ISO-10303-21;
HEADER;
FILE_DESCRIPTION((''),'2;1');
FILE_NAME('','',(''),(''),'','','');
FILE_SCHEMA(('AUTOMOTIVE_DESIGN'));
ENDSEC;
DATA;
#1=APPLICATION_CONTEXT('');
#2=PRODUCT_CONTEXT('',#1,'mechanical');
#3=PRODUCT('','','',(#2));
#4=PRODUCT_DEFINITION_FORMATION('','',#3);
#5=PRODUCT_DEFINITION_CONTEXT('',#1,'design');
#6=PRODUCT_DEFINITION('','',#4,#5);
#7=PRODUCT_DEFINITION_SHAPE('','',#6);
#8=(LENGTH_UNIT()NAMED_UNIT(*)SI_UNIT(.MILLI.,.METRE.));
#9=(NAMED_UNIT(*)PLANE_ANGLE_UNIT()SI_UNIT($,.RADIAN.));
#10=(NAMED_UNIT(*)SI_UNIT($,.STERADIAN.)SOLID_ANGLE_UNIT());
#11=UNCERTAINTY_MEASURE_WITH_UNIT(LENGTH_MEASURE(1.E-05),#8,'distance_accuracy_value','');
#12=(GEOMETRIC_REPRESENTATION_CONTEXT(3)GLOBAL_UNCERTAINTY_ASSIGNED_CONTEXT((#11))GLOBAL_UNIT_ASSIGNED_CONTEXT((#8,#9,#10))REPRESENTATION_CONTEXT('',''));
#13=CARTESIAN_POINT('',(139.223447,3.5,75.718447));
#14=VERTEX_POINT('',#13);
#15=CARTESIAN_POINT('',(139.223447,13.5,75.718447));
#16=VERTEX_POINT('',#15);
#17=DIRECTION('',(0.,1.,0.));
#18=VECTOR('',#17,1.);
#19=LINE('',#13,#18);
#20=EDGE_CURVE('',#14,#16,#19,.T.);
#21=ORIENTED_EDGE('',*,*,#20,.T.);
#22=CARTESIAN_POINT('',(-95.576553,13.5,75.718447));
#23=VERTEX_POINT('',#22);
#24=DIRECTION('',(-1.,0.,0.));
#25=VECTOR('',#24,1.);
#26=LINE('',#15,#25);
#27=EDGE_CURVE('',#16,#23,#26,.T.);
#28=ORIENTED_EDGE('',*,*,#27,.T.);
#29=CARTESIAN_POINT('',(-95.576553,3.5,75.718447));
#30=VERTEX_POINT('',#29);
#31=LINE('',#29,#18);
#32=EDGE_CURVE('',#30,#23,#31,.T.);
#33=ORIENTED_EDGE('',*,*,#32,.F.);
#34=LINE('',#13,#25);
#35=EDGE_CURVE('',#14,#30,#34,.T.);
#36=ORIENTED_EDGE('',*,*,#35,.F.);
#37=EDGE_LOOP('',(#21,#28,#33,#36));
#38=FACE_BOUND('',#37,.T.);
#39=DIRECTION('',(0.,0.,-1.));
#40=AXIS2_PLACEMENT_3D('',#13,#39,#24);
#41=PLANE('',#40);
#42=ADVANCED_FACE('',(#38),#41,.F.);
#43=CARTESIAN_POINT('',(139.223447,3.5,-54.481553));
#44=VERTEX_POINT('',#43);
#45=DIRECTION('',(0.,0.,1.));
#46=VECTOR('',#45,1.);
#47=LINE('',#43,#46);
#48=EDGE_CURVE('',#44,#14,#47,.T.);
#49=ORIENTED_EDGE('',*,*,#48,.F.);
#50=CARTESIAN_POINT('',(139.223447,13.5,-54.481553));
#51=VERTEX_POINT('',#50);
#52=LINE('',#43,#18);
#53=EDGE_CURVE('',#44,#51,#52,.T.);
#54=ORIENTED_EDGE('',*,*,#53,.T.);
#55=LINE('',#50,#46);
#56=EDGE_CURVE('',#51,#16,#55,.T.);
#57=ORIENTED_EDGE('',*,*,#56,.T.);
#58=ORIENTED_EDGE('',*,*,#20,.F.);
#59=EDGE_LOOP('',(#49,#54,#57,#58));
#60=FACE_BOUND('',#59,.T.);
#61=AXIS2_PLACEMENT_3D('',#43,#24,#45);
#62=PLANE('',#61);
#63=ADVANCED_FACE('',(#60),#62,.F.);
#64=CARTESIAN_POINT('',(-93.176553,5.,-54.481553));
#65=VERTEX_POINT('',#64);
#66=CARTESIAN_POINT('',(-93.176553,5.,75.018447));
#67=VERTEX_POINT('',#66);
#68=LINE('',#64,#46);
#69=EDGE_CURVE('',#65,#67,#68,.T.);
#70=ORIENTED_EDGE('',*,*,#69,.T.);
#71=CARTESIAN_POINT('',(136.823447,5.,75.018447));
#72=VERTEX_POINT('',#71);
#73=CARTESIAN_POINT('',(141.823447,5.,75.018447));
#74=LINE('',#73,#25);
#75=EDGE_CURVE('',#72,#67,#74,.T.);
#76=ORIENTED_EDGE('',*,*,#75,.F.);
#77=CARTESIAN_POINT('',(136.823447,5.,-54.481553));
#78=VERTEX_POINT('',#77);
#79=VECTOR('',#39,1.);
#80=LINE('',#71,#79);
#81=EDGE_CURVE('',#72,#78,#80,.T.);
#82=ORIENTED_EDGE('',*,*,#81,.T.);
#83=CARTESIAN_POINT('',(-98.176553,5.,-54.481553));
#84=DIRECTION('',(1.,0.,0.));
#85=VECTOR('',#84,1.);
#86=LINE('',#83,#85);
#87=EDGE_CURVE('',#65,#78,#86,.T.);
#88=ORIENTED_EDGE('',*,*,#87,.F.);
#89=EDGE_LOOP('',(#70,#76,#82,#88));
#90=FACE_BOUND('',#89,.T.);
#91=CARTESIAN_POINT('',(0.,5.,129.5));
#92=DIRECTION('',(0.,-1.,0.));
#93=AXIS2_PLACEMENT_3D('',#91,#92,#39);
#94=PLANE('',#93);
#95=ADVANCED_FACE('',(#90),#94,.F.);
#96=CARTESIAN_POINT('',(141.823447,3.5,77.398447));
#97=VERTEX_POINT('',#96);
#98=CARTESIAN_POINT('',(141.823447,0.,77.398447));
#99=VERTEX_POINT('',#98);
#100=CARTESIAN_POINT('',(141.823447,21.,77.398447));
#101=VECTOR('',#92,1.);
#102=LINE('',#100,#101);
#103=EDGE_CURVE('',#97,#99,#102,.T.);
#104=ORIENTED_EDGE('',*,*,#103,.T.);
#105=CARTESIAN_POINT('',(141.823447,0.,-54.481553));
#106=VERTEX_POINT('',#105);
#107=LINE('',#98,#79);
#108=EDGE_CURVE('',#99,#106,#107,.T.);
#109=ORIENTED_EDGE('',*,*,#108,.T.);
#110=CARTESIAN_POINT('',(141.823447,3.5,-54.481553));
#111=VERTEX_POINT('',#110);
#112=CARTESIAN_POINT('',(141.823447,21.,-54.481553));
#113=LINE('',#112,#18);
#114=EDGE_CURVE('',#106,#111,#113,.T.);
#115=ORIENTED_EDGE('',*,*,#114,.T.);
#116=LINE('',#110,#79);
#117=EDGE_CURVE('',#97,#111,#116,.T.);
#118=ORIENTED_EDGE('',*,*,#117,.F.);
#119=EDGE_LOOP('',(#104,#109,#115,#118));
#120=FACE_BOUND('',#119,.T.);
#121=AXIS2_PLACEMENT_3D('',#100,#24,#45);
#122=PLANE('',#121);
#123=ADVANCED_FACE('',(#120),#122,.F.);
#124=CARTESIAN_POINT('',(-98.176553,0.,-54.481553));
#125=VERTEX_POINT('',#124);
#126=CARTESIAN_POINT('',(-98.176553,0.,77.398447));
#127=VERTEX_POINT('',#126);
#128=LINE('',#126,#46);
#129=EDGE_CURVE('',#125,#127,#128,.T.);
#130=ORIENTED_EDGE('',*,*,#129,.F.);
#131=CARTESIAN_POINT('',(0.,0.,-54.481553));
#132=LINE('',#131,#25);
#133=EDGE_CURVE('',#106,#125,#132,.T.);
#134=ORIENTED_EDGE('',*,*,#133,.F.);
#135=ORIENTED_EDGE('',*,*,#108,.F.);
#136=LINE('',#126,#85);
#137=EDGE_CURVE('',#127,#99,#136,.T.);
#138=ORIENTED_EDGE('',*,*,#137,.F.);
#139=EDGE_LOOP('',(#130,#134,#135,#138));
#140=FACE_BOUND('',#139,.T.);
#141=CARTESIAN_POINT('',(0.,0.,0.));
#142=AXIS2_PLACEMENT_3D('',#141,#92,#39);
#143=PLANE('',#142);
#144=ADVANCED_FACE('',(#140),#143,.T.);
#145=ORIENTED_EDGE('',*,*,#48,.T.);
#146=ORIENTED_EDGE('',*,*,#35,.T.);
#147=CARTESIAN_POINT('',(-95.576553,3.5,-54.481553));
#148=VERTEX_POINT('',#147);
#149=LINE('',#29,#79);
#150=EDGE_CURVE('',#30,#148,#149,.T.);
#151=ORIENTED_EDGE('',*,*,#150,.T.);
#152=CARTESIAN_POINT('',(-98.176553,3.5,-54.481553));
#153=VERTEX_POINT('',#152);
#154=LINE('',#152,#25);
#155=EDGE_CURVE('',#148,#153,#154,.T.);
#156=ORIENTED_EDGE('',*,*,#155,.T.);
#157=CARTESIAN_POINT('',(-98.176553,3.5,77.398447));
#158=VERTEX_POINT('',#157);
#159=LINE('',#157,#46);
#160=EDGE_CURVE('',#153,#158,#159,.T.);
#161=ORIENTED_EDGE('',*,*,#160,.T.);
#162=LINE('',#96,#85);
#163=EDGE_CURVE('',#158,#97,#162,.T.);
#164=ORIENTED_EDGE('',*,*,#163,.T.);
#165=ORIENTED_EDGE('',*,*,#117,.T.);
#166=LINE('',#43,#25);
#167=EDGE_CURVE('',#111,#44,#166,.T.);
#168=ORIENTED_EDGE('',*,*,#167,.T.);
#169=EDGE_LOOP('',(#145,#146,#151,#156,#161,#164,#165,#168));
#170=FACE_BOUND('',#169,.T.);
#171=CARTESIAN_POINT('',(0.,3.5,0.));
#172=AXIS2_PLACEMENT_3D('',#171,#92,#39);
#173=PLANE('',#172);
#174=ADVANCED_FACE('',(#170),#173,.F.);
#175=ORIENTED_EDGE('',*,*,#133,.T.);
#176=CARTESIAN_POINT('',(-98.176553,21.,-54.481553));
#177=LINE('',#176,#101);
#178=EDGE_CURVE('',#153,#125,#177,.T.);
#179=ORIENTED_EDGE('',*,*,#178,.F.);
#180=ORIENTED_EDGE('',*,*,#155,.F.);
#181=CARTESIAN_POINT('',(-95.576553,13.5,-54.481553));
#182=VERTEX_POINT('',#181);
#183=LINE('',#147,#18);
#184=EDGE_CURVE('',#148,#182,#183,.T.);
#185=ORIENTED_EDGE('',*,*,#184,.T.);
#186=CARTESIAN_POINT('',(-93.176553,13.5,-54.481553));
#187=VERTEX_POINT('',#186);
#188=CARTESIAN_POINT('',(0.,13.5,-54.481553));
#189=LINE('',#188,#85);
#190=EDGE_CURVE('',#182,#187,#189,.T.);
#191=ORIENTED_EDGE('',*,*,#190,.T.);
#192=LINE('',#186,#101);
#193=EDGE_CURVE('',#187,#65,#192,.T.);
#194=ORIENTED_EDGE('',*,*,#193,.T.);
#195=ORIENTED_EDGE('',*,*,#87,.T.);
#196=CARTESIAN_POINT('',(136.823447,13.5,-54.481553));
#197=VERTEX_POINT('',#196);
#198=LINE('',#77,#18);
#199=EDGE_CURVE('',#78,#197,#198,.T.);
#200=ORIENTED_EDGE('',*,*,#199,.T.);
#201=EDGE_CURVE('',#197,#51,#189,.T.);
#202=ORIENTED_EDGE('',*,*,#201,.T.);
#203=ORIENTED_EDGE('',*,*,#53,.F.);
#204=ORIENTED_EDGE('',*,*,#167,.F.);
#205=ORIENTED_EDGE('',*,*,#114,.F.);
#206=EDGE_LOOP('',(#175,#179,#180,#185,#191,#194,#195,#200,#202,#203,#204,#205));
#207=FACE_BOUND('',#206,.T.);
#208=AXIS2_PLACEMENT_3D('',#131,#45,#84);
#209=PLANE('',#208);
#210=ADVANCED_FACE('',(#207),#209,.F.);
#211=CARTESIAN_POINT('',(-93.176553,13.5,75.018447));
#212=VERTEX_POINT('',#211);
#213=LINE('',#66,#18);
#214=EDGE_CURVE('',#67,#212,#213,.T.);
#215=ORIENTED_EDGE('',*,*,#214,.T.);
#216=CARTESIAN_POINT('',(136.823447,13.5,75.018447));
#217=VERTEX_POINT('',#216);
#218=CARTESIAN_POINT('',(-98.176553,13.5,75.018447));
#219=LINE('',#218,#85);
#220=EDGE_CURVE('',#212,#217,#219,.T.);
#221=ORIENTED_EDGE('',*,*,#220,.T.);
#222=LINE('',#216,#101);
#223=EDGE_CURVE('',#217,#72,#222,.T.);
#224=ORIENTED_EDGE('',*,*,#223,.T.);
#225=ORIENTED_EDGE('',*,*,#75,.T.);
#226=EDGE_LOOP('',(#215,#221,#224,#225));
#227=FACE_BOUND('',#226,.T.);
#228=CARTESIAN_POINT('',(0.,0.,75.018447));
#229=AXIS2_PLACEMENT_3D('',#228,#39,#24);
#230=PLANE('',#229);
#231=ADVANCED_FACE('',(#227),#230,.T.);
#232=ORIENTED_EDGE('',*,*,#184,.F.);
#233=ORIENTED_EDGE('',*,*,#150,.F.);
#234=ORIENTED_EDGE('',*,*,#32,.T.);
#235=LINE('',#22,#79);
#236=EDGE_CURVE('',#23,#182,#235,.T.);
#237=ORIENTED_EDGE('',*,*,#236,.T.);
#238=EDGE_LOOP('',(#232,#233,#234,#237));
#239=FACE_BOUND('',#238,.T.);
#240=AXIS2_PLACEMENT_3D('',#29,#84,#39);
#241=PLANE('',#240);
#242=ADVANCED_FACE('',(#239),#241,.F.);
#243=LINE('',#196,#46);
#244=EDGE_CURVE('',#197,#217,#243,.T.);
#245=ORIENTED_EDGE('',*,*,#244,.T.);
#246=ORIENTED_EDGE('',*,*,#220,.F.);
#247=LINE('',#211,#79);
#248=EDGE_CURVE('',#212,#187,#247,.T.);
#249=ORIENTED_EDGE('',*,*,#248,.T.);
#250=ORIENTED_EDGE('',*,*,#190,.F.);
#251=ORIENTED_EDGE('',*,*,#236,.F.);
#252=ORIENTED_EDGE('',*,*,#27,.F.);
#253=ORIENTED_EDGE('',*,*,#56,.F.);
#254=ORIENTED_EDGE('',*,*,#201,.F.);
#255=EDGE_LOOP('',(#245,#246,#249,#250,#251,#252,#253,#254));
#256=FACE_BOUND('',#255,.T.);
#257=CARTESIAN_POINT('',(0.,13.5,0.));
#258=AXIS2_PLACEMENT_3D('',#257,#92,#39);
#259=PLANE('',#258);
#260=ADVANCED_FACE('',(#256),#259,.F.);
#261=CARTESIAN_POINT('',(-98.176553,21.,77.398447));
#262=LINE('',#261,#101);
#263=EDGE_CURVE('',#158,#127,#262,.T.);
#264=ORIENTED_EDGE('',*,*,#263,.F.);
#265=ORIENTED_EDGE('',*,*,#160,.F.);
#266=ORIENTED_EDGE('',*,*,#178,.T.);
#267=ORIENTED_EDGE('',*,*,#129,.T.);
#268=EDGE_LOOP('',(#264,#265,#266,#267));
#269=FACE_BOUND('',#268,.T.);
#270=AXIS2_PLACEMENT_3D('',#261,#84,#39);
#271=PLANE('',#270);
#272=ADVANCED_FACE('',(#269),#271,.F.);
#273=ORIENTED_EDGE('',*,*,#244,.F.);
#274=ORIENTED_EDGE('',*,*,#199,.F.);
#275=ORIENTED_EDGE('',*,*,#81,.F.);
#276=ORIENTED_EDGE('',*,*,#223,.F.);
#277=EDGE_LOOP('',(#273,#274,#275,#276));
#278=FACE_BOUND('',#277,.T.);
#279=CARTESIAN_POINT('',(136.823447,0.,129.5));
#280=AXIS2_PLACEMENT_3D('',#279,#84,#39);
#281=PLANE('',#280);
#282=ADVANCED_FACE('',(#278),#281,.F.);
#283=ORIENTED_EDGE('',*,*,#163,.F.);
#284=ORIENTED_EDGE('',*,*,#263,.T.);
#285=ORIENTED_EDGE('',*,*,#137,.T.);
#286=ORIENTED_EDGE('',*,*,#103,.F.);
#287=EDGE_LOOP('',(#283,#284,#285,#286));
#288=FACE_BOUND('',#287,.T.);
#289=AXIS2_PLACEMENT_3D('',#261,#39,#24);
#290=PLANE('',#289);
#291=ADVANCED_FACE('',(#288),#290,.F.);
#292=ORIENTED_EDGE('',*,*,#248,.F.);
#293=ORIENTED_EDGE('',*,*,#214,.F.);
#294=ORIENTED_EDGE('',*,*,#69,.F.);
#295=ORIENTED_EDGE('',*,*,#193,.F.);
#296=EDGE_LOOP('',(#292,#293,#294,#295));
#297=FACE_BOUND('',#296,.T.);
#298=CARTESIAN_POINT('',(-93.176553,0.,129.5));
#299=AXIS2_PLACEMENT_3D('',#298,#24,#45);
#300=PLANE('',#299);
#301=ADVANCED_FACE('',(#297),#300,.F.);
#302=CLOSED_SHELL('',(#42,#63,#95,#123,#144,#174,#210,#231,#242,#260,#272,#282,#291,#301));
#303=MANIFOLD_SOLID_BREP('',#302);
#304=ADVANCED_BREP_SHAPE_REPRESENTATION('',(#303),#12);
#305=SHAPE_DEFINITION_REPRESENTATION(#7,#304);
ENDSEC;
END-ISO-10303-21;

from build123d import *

# Parameters (mm, degrees)
SKETCH1_W           = 240
SKETCH1_H           = 351.15
BOSS_EXTRUDE3_DEPTH = 21
SKETCH5_W           = 248.975913499
SKETCH5_H           = 113.170869772
CUT_EXTRUDE5_DEPTH  = 254
CAVITY1_START       = -93.176553254
CAVITY1_DEPTH       = 230
SKETCH6_W           = 230
SKETCH6_H           = 2.384694545
CUT_EXTRUDE6_DEPTH  = 10
SKETCH7_W           = 329.692379319
SKETCH7_H           = 158.801284786
CUT_EXTRUDE8_DEPTH  = 33
CUT_EXTRUDE9_DEPTH  = 10


with BuildPart() as part:
    # Sketch1 → Boss-Extrude3 (new body)
    with BuildSketch(Plane(origin=(0, 0, 0), x_dir=(1, 0, 0), z_dir=(0, 1, 0))):
        with Locations((21.823446746, 98.176553254)):
            Rectangle(SKETCH1_W, SKETCH1_H)
    extrude(amount=BOSS_EXTRUDE3_DEPTH)

    # Sketch5 → Cut-Extrude5 (cut)
    with BuildSketch(Plane(origin=(0, 0, -54.481553254), x_dir=(-1, 0, 0), z_dir=(0, 0, -1))):
        with Locations((-20.8478358, 4.110963623)):
            Rectangle(SKETCH5_W, SKETCH5_H)
    extrude(amount=CUT_EXTRUDE5_DEPTH, mode=Mode.SUBTRACT)

    # Cavity1: read off the stored shape, not the designer's step
    # Cavity1 outline → Cavity1 (cut)
    with BuildSketch(Plane.YZ.offset(CAVITY1_START)):
        Polygon((18.5, 60.403141291), (13.5, 67.518446746), (13.5, 67.903141291), (18.5, 67.903141291), (13.5, 75.018446746), (5, 75.018446746), (5, -54.481553254), (13.5, -54.481553254), (13.5, -52.096858709), (18.5, -52.096858709), (13.5, -44.981553254), (13.5, -44.596858709), (18.5, -44.596858709), (13.5, -37.481553254), (13.5, -37.096858709), (18.5, -37.096858709), (13.5, -29.981553254), (13.5, -29.596858709), (18.5, -29.596858709), (13.5, -22.481553254), (13.5, -22.096858709), (18.5, -22.096858709), (13.5, -14.981553254), (13.5, -14.596858709), (18.5, -14.596858709), (13.5, -7.481553254), (13.5, -7.096858709), (18.5, -7.096858709), (13.5, 0.018446746), (13.5, 0.403141291), (18.5, 0.403141291), (13.5, 7.518446746), (13.5, 7.903141291), (18.5, 7.903141291), (13.5, 15.018446746), (13.5, 15.403141291), (18.5, 15.403141291), (13.5, 22.518446746), (13.5, 22.903141291), (18.5, 22.903141291), (13.5, 30.018446746), (13.5, 30.403141291), (18.5, 30.403141291), (13.5, 37.518446746), (13.5, 37.903141291), (18.5, 37.903141291), (13.5, 45.018446746), (13.5, 45.403141291), (18.5, 45.403141291), (13.5, 52.518446746), (13.5, 52.903141291), (18.5, 52.903141291), (13.5, 60.018446746), (13.5, 60.403141291), align=None)
    extrude(amount=CAVITY1_DEPTH, mode=Mode.SUBTRACT)

    # Sketch6 → Cut-Extrude6 (cut)
    with BuildSketch(Plane(origin=(0, 13.5, 0), x_dir=(-1, 0, 0), z_dir=(0, -1, 0))):
        with Locations((-21.823446746, 53.289205982)):
            Rectangle(SKETCH6_W, SKETCH6_H)
    extrude(amount=-CUT_EXTRUDE6_DEPTH, mode=Mode.SUBTRACT)

    # Sketch7 → Cut-Extrude8 (cut)
    with BuildSketch(Plane(origin=(0, 13.5, 0), x_dir=(-1, 0, 0), z_dir=(0, -1, 0))):
        with Locations((-33.84938791, -12.885366014)):
            Rectangle(SKETCH7_W, SKETCH7_H)
    extrude(amount=-CUT_EXTRUDE8_DEPTH, mode=Mode.SUBTRACT)

    # Sketch9 → Cut-Extrude9 (cut)
    with BuildSketch(Plane(origin=(0, 13.5, 0), x_dir=(1, 0, 0), z_dir=(0, 1, 0))):
        Polygon((139.223446746, 54.481553254), (139.223446746, -75.718446746), (-95.576553254, -75.718446746), (-95.576553254, 54.481553254), (-98.176553254, 54.481553254), (-98.176553254, -77.398446746), (141.823446746, -77.398446746), (141.823446746, 54.481553254), align=None)
    extrude(amount=-CUT_EXTRUDE9_DEPTH, mode=Mode.SUBTRACT)


solid = part.part
